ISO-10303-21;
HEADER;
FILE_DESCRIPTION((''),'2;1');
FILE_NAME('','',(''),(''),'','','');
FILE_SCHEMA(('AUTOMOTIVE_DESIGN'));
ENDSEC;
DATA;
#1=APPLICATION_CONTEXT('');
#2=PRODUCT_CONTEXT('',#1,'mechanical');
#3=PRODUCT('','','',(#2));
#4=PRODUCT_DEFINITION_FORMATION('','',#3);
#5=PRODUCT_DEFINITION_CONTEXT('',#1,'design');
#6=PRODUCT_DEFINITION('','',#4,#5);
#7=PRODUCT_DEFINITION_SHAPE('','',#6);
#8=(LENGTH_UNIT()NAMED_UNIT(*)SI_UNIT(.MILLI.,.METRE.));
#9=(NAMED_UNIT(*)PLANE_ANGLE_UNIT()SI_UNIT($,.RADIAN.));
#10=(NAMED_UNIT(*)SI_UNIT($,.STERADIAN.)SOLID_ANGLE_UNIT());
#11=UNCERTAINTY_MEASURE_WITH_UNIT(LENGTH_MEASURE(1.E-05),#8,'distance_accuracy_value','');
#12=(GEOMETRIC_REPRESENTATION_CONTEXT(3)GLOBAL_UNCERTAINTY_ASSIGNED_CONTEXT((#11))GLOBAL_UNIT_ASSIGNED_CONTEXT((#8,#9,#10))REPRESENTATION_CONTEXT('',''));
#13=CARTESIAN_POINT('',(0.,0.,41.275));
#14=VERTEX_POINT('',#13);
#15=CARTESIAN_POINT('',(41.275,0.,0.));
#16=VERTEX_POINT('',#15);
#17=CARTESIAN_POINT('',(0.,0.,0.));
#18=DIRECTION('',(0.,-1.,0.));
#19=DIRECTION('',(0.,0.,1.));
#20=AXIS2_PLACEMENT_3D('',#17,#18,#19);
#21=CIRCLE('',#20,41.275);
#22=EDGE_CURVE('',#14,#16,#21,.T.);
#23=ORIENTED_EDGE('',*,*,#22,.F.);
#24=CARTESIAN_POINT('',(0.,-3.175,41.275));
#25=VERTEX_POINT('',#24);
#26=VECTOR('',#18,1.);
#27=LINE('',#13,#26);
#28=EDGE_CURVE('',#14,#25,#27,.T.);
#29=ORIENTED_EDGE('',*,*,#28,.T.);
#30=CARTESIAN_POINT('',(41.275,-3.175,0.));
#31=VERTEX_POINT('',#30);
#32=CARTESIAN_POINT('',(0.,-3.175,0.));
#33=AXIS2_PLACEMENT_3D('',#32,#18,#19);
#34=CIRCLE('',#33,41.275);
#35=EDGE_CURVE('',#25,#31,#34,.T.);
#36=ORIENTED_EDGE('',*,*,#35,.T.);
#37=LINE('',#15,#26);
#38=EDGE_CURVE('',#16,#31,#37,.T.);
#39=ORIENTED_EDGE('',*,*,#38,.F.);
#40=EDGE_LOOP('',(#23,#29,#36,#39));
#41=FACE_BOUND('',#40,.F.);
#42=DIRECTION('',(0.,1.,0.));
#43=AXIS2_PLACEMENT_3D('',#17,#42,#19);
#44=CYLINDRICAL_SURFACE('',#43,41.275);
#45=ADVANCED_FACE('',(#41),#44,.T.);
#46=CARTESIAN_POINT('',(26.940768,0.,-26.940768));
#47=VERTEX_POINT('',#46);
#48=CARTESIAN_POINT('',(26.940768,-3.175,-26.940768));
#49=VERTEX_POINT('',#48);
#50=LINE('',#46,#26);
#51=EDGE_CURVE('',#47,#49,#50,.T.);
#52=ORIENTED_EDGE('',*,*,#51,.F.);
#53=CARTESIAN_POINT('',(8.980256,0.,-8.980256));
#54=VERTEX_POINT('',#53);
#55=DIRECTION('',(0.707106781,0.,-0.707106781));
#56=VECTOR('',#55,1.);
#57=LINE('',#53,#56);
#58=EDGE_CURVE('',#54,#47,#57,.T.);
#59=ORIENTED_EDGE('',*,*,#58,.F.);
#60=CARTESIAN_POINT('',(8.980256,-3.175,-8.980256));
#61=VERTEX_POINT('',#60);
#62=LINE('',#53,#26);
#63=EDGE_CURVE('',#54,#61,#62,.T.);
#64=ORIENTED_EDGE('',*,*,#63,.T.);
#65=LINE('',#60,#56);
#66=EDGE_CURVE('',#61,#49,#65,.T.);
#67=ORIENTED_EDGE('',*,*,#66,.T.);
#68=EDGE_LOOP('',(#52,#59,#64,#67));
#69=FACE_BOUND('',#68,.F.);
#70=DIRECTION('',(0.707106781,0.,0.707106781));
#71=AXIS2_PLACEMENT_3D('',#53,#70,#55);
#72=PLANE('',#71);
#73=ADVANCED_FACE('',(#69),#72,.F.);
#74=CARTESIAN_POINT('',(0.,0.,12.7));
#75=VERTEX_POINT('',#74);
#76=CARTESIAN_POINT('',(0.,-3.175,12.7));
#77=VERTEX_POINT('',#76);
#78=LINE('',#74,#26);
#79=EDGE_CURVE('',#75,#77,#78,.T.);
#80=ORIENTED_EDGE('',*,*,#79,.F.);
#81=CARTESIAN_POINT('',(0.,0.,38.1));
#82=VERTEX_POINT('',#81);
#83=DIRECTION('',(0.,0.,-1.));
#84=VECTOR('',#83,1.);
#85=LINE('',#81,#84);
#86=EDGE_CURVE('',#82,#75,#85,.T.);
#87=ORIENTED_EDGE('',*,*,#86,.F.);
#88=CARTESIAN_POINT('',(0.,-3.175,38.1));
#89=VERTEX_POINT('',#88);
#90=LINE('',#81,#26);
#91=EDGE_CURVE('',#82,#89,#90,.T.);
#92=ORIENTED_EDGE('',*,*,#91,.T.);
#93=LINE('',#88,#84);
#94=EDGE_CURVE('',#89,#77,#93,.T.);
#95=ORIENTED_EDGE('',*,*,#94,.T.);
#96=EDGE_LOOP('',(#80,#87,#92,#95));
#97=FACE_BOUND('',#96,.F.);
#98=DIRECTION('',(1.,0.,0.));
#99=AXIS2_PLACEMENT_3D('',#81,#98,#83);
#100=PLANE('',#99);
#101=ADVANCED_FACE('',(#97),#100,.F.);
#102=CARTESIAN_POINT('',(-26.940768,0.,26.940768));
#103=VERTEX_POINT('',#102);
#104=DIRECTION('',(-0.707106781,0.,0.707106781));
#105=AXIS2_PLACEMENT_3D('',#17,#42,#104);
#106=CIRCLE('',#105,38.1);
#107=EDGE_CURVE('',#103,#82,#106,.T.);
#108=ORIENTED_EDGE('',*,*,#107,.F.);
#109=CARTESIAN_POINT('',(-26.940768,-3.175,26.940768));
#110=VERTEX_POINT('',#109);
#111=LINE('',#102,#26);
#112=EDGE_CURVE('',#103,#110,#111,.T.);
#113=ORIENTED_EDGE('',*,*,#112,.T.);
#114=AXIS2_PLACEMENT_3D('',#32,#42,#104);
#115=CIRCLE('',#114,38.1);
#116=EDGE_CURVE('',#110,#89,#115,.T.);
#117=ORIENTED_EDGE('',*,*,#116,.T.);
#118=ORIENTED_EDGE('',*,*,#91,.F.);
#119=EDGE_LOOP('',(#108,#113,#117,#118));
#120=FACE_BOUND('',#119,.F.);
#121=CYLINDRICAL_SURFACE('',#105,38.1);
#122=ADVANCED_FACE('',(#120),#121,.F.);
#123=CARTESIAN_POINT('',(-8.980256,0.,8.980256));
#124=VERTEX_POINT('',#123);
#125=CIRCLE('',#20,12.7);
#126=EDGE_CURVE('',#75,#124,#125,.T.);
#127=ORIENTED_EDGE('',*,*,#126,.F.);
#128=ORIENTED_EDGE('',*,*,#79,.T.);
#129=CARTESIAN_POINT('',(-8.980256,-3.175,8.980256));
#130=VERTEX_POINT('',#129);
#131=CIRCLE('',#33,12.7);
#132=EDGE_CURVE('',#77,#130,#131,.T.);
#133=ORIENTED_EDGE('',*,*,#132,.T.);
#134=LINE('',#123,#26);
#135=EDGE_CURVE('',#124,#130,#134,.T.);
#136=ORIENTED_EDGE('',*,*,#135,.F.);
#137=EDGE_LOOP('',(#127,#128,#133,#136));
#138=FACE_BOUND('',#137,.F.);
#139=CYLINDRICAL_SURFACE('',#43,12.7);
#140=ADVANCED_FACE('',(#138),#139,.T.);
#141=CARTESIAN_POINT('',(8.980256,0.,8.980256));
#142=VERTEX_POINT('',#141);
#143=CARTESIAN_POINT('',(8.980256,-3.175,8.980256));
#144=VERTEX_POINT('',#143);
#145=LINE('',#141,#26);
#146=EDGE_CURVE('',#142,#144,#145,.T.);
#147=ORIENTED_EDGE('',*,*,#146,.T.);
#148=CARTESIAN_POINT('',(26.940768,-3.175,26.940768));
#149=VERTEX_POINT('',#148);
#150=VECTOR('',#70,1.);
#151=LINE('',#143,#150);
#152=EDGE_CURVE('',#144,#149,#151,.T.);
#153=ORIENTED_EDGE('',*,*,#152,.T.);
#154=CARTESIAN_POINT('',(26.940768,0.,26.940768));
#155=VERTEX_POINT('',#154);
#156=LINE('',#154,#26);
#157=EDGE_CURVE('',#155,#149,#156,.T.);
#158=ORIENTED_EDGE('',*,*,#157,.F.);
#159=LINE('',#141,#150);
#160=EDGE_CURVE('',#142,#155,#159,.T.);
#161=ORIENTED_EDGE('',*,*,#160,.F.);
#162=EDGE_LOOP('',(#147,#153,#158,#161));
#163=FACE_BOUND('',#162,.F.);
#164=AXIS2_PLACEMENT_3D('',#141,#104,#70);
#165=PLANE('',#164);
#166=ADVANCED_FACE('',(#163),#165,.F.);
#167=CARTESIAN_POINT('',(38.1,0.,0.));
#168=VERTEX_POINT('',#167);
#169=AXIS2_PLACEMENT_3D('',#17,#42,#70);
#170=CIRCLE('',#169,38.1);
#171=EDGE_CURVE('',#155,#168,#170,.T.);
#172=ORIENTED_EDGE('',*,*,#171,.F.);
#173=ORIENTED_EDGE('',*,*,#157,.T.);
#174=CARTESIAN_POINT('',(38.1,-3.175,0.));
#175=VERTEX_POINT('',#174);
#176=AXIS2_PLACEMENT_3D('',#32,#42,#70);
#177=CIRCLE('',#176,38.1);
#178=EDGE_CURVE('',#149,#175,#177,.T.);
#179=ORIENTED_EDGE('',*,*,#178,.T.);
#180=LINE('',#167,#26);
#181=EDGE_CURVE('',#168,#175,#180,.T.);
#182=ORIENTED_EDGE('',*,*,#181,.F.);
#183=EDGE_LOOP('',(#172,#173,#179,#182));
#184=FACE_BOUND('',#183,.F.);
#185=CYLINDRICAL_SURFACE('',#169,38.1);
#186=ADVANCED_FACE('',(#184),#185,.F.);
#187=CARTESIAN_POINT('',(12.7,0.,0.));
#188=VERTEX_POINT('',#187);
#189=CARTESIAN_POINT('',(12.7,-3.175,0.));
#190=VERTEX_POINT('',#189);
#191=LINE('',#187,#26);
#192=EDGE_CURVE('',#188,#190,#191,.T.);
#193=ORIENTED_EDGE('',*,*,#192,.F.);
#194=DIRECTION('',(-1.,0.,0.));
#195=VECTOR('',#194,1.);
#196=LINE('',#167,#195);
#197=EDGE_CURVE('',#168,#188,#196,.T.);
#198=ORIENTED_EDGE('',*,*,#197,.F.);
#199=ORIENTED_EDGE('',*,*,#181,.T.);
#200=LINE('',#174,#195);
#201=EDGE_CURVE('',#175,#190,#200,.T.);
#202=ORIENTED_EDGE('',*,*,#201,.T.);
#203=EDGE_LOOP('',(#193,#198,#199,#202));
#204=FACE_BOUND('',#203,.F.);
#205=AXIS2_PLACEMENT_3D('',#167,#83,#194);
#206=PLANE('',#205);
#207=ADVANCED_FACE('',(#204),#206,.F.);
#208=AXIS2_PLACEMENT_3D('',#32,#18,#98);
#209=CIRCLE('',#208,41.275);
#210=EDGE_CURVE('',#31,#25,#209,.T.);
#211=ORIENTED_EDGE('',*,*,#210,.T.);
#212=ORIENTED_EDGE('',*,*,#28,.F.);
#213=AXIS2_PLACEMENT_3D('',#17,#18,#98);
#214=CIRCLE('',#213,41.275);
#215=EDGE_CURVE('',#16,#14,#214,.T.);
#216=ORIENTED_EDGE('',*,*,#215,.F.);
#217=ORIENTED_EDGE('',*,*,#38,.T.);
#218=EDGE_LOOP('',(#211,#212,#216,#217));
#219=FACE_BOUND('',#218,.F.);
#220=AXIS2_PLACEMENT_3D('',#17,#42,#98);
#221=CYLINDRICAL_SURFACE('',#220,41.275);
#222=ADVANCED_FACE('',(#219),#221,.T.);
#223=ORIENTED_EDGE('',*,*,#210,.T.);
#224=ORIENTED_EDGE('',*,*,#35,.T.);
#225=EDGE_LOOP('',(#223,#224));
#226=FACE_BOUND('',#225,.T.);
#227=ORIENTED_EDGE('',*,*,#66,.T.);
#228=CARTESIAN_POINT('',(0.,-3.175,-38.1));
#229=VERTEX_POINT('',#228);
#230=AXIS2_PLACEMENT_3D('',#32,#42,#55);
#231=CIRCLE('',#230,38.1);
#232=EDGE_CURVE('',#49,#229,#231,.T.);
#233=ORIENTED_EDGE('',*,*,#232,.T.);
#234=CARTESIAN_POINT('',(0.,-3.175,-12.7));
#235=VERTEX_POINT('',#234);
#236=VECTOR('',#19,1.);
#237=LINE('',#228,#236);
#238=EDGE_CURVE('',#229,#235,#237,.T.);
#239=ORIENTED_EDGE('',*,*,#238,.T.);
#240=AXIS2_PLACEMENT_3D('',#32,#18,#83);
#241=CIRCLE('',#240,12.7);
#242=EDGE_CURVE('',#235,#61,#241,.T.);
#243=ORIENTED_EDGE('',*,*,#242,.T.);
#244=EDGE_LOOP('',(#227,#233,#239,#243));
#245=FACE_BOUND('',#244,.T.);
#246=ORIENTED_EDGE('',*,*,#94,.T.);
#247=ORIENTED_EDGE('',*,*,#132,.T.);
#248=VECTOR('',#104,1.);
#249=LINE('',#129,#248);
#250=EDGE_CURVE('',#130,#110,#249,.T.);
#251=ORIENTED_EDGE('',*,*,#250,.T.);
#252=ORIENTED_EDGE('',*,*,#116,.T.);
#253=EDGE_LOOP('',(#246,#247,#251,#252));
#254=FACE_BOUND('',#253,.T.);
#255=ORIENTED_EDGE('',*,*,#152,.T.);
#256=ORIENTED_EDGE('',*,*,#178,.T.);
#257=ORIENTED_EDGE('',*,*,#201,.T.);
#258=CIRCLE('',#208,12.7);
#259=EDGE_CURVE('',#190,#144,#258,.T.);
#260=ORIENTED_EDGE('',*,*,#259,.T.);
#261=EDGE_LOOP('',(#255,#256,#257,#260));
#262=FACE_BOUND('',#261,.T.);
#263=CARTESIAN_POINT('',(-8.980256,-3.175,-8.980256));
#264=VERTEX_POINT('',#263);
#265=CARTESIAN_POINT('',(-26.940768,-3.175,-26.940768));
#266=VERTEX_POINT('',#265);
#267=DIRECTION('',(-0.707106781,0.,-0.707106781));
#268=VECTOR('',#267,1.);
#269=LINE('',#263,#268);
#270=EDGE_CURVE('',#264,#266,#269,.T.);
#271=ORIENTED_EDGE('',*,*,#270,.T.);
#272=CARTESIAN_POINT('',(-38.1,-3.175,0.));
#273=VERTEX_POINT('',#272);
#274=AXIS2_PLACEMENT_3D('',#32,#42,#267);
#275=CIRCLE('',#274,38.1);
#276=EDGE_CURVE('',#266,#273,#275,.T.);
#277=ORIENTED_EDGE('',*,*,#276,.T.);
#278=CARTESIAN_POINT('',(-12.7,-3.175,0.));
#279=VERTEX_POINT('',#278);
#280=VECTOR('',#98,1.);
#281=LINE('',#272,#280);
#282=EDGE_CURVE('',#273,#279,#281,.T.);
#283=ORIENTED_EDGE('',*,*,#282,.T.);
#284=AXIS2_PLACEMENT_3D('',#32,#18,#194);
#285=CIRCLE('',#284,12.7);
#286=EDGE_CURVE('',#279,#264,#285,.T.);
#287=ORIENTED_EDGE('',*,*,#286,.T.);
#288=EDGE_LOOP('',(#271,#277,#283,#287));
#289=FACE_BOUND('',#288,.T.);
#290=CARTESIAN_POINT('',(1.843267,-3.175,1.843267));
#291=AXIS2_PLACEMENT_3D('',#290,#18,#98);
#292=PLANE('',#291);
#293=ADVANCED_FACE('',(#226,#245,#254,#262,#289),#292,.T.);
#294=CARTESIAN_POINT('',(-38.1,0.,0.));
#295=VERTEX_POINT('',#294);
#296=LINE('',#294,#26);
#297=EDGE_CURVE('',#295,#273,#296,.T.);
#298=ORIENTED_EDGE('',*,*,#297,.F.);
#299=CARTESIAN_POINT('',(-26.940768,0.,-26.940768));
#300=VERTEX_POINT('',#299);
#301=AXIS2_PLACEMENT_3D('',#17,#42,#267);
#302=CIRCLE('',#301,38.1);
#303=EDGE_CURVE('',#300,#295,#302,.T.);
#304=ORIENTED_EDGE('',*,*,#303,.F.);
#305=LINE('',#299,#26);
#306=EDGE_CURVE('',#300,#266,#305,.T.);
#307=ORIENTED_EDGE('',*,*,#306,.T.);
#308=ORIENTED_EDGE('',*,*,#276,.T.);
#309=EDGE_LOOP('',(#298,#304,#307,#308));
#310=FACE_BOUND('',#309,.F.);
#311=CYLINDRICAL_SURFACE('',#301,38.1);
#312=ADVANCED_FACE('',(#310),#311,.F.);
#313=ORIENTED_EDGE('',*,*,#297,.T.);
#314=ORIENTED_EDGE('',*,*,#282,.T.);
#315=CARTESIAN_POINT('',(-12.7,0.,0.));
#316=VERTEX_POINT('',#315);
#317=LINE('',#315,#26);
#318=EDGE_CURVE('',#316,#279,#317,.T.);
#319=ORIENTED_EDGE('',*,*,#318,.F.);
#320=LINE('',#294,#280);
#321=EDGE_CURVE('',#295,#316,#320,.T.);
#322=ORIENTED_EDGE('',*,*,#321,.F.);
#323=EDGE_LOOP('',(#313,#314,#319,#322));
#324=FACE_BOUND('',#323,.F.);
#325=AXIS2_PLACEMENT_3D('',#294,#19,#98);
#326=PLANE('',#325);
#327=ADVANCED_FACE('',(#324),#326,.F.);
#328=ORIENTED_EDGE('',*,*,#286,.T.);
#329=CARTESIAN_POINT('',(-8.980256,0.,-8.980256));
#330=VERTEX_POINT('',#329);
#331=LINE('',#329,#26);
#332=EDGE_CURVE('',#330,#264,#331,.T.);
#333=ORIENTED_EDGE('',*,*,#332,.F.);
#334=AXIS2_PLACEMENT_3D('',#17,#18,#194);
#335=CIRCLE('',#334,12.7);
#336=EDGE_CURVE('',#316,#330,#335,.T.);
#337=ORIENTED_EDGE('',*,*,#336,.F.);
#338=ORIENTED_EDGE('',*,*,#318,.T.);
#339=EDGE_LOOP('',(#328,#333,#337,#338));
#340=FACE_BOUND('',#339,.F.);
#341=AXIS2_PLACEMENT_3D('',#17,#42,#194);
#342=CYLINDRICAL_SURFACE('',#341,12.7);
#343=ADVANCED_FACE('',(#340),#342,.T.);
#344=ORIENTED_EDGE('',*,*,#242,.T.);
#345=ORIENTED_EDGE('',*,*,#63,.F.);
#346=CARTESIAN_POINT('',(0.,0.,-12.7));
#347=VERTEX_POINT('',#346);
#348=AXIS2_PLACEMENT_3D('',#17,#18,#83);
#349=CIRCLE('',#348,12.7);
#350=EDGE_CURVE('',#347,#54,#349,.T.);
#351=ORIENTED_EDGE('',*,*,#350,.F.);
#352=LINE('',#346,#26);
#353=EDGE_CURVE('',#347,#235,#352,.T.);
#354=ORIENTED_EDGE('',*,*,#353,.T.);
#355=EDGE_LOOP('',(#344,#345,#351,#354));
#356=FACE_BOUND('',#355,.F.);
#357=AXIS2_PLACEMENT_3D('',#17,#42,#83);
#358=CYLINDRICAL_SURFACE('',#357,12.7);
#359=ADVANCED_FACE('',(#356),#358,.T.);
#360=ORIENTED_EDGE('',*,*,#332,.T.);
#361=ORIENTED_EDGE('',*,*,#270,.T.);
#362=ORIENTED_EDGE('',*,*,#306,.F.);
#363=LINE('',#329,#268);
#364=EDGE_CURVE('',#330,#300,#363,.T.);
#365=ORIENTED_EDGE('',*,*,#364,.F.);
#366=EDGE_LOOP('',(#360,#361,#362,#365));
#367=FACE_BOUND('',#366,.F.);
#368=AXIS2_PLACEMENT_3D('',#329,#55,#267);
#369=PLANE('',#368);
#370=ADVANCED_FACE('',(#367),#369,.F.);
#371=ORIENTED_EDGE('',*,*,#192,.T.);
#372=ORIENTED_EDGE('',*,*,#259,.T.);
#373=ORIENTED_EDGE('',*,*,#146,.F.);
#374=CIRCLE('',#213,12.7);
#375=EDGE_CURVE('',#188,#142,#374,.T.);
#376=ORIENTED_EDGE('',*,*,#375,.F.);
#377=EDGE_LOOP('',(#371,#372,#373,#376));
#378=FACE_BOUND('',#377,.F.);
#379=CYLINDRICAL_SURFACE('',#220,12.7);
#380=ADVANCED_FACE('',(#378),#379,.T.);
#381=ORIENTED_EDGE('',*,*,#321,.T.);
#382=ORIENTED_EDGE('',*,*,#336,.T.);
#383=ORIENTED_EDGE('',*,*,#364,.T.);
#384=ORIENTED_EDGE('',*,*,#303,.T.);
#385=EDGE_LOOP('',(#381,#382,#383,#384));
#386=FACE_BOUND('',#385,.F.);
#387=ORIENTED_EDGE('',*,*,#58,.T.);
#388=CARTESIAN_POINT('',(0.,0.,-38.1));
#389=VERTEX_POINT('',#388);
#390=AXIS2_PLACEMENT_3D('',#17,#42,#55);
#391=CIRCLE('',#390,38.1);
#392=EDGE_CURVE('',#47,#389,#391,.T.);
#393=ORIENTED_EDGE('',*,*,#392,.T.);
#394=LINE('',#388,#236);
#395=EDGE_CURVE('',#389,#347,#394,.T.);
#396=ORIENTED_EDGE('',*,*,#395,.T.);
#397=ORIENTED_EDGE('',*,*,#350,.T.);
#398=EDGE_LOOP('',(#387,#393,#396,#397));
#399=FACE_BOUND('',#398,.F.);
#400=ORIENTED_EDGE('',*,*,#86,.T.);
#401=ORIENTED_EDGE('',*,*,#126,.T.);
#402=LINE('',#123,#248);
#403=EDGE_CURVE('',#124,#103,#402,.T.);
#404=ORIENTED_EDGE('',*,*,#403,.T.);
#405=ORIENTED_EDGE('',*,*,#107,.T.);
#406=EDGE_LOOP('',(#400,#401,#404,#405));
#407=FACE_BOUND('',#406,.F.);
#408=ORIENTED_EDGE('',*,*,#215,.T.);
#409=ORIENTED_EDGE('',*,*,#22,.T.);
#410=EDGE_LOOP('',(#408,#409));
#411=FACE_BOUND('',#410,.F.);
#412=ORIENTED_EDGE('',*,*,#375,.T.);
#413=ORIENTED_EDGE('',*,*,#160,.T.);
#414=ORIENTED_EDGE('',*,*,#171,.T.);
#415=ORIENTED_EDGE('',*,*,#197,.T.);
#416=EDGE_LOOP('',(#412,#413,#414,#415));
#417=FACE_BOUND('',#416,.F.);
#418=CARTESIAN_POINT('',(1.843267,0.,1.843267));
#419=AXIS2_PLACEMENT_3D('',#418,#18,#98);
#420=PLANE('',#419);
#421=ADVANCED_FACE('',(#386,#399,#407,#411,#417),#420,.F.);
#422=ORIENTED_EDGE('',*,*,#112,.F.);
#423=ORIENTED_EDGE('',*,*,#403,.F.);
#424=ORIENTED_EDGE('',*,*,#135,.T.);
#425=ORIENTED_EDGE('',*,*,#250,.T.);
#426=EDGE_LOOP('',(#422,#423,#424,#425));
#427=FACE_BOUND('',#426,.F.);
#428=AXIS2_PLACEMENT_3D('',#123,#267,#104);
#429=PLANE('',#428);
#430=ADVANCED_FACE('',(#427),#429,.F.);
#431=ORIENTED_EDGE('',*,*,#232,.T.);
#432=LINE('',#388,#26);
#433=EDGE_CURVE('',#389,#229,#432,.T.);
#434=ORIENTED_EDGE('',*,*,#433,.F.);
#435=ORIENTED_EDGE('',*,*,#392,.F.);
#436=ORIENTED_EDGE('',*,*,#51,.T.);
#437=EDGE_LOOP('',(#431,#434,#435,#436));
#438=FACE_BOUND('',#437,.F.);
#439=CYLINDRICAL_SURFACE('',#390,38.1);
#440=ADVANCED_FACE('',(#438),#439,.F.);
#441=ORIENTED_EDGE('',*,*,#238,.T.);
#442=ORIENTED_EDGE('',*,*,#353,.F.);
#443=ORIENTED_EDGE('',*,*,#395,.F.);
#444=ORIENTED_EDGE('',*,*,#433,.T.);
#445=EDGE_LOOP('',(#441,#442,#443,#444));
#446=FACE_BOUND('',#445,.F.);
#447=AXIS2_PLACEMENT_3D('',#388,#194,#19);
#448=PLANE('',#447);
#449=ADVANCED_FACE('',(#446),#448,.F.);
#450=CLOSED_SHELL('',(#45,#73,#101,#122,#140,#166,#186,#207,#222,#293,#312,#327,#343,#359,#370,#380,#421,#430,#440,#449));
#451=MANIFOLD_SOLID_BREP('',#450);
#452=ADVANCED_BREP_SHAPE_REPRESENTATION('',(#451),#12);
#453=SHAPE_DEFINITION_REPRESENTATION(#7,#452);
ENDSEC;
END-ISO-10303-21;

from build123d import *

# Parameters (mm, degrees)
F0_R     = 9.525
F1_DEPTH = 3.175


with BuildPart() as f1:
    # F0 (on Front) → F1 (new body)
    with BuildSketch(Plane.XZ):
        with BuildLine():
            ThreePointArc((41.275, 0), (29.1858323935, 29.1858323935), (0, 41.275))
            ThreePointArc((0, 41.275), (-29.1858323935, -29.1858323935), (41.275, 0))
        make_face()
        with BuildLine():
            ThreePointArc((26.9407683632, 26.9407683632), (35.1998101887, 14.5802387731), (38.1, 0))
            ThreePointArc((38.1, 0), (35.1998101887, -14.5802387731), (26.9407683632, -26.9407683632))
            ThreePointArc((26.9407683632, -26.9407683632), (14.5802387731, -35.1998101887), (0, -38.1))
            ThreePointArc((0, -38.1), (-14.5802387731, -35.1998101887), (-26.9407683632, -26.9407683632))
            ThreePointArc((-26.9407683632, -26.9407683632), (-35.1998101887, -14.5802387731), (-38.1, 0))
            ThreePointArc((-38.1, 0), (-35.1998101887, 14.5802387731), (-26.9407683632, 26.9407683632))
            ThreePointArc((-26.9407683632, 26.9407683632), (-14.5802387731, 35.1998101887), (0, 38.1))
            ThreePointArc((0, 38.1), (14.5802387731, 35.1998101887), (26.9407683632, 26.9407683632))
        make_face(mode=Mode.SUBTRACT)
        with BuildLine():
            ThreePointArc((26.9407683632, -26.9407683632), (35.1998101887, -14.5802387731), (38.1, 0))
            Line((38.1, 0), (12.7, 0))
            ThreePointArc((12.7, 0), (11.7332700629, -4.860079591), (8.9802561211, -8.9802561211))
            Line((8.9802561211, -8.9802561211), (26.9407683632, -26.9407683632))
        make_face()
        with BuildLine():
            Line((8.9802561211, 8.9802561211), (26.9407683632, 26.9407683632))
            ThreePointArc((26.9407683632, 26.9407683632), (14.5802387731, 35.1998101887), (0, 38.1))
            Line((0, 38.1), (0, 12.7))
            ThreePointArc((0, 12.7), (4.860079591, 11.7332700629), (8.9802561211, 8.9802561211))
        make_face()
        with BuildLine():
            ThreePointArc((8.9802561211, -8.9802561211), (11.7332700629, -4.860079591), (12.7, 0))
            ThreePointArc((12.7, 0), (11.7332700629, 4.860079591), (8.9802561211, 8.9802561211))
            ThreePointArc((8.9802561211, 8.9802561211), (4.860079591, 11.7332700629), (0, 12.7))
            ThreePointArc((0, 12.7), (-4.860079591, 11.7332700629), (-8.9802561211, 8.9802561211))
            ThreePointArc((-8.9802561211, 8.9802561211), (-11.7332700629, 4.860079591), (-12.7, 0))
            ThreePointArc((-12.7, 0), (-11.7332700629, -4.860079591), (-8.9802561211, -8.9802561211))
            ThreePointArc((-8.9802561211, -8.9802561211), (-4.860079591, -11.7332700629), (0, -12.7))
            ThreePointArc((0, -12.7), (4.860079591, -11.7332700629), (8.9802561211, -8.9802561211))
        make_face()
        Circle(F0_R, mode=Mode.SUBTRACT)
        with BuildLine():
            ThreePointArc((-26.9407683632, -26.9407683632), (-14.5802387731, -35.1998101887), (0, -38.1))
            Line((0, -38.1), (0, -12.7))
            ThreePointArc((0, -12.7), (-4.860079591, -11.7332700629), (-8.9802561211, -8.9802561211))
            Line((-8.9802561211, -8.9802561211), (-26.9407683632, -26.9407683632))
        make_face()
        with BuildLine():
            Line((-8.9802561211, 8.9802561211), (-26.9407683632, 26.9407683632))
            ThreePointArc((-26.9407683632, 26.9407683632), (-35.1998101887, 14.5802387731), (-38.1, 0))
            Line((-38.1, 0), (-12.7, 0))
            ThreePointArc((-12.7, 0), (-11.7332700629, 4.860079591), (-8.9802561211, 8.9802561211))
        make_face()
        Circle(F0_R)
    extrude(amount=F1_DEPTH)


solid = f1.part
